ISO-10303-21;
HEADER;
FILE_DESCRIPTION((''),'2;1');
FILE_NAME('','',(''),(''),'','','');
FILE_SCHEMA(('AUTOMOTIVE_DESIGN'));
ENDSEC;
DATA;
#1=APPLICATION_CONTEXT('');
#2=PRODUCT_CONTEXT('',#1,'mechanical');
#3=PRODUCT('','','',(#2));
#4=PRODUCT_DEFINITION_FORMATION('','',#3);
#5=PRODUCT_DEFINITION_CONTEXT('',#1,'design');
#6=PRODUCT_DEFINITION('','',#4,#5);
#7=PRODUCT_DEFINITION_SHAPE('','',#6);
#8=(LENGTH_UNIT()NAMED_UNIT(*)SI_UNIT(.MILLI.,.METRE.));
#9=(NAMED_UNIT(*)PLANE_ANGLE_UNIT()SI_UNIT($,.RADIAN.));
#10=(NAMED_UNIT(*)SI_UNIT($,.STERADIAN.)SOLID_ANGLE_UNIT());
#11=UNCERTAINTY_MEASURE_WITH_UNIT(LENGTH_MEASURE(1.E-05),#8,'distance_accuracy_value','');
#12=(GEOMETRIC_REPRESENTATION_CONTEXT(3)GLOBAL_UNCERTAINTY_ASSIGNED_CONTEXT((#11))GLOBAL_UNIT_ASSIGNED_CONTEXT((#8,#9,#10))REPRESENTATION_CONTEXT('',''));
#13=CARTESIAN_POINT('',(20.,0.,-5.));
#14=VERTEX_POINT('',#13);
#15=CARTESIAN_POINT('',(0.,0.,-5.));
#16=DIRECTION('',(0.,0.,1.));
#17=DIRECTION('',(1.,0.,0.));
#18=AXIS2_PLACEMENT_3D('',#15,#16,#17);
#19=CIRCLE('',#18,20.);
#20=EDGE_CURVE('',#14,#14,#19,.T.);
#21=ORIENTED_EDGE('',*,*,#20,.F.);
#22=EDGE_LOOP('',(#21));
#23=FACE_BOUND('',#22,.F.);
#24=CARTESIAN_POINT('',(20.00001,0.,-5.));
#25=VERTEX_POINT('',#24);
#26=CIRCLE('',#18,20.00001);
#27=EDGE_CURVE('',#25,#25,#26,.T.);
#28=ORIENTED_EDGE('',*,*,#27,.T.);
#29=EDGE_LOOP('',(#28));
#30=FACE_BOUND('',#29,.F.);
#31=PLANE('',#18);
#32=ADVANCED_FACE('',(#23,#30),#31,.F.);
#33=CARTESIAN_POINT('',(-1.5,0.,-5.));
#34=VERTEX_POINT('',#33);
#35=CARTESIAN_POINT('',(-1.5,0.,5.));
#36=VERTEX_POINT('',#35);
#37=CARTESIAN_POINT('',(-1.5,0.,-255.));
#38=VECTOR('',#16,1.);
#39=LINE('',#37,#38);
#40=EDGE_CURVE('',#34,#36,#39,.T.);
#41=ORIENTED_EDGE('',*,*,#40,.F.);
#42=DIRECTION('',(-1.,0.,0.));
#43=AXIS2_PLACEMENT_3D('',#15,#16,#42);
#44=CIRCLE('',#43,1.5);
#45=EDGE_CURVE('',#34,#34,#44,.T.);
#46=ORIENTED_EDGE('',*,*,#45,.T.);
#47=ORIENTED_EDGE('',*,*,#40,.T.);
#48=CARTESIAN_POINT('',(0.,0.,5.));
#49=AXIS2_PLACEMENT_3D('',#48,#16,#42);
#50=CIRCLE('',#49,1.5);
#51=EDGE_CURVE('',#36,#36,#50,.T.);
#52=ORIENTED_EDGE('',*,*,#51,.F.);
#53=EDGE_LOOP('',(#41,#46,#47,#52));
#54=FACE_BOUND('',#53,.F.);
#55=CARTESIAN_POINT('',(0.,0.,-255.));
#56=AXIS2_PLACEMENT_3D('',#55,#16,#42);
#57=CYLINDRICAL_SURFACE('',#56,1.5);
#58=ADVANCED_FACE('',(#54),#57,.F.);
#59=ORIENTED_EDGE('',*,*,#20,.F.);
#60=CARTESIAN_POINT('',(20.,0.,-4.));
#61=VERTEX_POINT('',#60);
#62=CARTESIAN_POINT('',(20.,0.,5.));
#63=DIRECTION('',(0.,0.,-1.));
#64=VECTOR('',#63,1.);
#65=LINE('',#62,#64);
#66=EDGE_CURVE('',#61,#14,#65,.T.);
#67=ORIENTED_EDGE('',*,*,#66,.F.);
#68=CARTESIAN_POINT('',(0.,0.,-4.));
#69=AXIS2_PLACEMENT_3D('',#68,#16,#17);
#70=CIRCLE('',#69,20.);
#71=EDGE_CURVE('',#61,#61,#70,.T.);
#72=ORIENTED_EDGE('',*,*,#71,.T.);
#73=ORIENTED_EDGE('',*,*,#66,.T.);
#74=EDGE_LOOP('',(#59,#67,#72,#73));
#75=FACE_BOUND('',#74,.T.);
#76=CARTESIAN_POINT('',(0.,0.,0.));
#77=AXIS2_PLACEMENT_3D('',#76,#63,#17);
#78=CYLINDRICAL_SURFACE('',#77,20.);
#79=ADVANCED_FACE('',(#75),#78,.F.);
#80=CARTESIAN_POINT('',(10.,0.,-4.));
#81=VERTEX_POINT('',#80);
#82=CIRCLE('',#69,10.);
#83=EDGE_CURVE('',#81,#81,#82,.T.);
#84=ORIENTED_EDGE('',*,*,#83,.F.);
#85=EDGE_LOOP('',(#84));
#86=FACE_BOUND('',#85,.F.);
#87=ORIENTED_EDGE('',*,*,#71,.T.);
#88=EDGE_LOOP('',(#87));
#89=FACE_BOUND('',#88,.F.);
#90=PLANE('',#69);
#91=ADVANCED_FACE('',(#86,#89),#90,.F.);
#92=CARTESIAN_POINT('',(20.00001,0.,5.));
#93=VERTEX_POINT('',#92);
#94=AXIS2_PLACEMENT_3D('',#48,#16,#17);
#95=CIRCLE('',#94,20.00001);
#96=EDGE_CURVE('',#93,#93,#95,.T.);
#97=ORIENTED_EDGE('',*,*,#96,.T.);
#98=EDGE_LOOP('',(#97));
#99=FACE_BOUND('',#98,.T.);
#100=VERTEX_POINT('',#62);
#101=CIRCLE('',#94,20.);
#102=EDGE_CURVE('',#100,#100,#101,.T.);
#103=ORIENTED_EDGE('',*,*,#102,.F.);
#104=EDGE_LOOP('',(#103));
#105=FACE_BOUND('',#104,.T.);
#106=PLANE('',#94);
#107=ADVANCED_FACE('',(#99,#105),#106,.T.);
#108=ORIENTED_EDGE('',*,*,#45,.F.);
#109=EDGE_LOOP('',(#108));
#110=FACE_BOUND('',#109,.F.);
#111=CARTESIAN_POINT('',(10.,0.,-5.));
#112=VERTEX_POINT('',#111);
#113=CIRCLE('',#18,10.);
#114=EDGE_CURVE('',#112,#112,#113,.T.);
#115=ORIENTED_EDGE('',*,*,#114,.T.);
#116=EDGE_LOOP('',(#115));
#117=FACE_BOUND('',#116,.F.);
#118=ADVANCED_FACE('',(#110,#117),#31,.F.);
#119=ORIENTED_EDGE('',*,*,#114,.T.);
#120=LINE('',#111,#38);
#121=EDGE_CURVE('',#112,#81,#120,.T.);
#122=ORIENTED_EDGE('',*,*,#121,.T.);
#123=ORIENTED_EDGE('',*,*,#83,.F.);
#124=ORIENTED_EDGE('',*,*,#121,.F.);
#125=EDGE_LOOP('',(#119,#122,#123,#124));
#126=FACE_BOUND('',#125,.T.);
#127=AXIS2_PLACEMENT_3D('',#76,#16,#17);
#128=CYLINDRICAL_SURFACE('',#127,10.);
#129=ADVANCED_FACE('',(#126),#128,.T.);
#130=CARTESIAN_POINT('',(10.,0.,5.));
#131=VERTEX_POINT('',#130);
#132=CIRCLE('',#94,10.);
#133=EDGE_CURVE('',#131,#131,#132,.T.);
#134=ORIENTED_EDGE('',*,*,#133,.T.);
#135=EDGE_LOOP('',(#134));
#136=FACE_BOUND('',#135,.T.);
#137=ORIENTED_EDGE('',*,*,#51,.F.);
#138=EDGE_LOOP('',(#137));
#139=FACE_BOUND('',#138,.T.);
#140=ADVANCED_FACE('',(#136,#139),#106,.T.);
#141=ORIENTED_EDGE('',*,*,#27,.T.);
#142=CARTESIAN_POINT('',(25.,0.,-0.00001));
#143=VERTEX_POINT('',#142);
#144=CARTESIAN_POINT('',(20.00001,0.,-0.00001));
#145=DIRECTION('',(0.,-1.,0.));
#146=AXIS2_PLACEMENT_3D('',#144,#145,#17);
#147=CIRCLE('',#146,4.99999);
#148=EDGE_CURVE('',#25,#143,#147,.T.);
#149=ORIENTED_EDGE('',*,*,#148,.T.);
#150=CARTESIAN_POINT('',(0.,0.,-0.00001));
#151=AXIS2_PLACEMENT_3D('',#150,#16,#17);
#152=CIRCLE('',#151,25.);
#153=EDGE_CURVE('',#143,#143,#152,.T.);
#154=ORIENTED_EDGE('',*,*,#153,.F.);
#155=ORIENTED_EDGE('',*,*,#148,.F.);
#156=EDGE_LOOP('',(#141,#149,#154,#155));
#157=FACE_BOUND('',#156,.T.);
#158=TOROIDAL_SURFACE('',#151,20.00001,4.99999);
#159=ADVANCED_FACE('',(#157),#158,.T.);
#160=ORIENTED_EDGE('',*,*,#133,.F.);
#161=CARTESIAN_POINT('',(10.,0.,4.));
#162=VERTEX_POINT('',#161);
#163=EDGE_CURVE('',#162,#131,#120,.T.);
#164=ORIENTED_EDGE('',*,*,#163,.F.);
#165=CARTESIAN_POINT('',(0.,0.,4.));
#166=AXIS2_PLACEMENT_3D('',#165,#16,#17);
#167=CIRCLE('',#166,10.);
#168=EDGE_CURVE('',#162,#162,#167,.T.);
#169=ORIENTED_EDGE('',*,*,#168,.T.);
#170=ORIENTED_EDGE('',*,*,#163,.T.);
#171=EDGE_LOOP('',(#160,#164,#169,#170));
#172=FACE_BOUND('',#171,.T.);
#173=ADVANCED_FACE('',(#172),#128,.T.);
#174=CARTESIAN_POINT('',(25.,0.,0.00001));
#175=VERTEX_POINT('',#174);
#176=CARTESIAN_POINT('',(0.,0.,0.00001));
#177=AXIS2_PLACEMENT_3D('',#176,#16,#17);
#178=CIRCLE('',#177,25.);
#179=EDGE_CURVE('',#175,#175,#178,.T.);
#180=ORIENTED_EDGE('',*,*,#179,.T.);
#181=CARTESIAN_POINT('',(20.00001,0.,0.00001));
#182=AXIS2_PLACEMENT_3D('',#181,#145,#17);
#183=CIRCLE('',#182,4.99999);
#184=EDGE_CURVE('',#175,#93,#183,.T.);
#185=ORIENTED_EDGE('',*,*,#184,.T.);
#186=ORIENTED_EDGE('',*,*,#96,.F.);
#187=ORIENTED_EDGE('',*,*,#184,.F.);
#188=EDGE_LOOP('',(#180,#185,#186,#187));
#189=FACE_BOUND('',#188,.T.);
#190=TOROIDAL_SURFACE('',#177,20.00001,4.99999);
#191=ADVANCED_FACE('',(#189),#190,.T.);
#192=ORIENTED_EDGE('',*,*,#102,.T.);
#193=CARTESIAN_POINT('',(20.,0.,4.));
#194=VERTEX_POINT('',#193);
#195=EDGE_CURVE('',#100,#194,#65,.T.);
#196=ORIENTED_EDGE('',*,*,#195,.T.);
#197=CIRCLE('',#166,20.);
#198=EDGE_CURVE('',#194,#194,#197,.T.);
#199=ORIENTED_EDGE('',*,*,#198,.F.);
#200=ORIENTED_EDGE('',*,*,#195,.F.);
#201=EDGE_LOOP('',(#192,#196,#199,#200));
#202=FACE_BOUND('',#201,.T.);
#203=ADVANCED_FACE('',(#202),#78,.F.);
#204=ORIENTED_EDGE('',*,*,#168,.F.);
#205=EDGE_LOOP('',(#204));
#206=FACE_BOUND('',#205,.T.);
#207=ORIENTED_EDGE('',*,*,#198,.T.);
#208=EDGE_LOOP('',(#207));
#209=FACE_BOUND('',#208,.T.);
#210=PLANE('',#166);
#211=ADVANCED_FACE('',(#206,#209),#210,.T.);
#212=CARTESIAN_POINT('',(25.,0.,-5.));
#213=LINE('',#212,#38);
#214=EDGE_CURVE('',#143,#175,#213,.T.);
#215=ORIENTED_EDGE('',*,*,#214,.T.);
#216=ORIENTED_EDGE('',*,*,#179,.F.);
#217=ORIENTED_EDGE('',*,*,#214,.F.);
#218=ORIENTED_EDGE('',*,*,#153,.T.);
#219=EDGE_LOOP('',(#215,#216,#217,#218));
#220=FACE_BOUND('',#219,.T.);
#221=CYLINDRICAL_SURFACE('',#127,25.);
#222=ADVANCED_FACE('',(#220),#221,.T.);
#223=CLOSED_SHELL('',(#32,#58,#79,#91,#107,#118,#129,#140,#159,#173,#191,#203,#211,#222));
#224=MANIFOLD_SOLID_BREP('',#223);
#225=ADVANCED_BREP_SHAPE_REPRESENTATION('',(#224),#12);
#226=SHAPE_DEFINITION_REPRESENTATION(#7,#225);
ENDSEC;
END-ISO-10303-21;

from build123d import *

# Parameters (mm, degrees)
F0_R     = 25
F0_R_2   = 20
F1_DEPTH = 5
F0_R_3   = 10
F2_DEPTH = 4
F3_R     = 4.99999
F5_D     = 3
F5_DEPTH = 250
F5_TIP   = 0.9012909285


# Not quite as in the source:
# - a fillet or chamfer is up to 0.001 mm smaller than in the source, because OpenCascade refuses the exact size


with BuildPart() as f1:
    # F0 (on Top) → F1 (new body, symmetric)
    with BuildSketch(Plane.XY):
        Circle(F0_R)
        Circle(F0_R_2, mode=Mode.SUBTRACT)
    extrude(amount=F1_DEPTH, both=True)



with BuildPart() as f1b:
    # F0 (on Top) → F1, piece 2 (new body, symmetric)
    with BuildSketch(Plane.XY):
        Circle(F0_R_3)
    extrude(amount=F1_DEPTH, both=True)


with BuildPart() as f1_1:
    add(f1.part)

    add(f1b.part)  # F2 merges F1b
    # F0 (on Top) → F2 (join, symmetric)
    with BuildSketch(Plane.XY):
        Circle(F0_R_2)
        Circle(F0_R_3, mode=Mode.SUBTRACT)
    extrude(amount=F2_DEPTH, both=True)

    # F3 (radius 5 in the source; OpenCascade refuses exactly that, so slightly less here)
    f3_edges = [f1_1.edges().sort_by_distance(p)[0] for p in [
        (-25, 0, 5),
        (-25, 0, -5),
    ]]
    fillet(f3_edges, radius=F3_R)

    # F5
    with Locations(Plane(origin=(0, 0, -5), x_dir=(1, 0, 0), z_dir=(0, 0, -1))):
        with Locations((0, 0)):
            Hole(F5_D / 2, depth=F5_DEPTH)
            with Locations((0, 0, -(F5_DEPTH + F5_TIP / 2))):  # 118° drill point
                Cone(0, F5_D / 2, F5_TIP, mode=Mode.SUBTRACT)


solid = f1_1.part
